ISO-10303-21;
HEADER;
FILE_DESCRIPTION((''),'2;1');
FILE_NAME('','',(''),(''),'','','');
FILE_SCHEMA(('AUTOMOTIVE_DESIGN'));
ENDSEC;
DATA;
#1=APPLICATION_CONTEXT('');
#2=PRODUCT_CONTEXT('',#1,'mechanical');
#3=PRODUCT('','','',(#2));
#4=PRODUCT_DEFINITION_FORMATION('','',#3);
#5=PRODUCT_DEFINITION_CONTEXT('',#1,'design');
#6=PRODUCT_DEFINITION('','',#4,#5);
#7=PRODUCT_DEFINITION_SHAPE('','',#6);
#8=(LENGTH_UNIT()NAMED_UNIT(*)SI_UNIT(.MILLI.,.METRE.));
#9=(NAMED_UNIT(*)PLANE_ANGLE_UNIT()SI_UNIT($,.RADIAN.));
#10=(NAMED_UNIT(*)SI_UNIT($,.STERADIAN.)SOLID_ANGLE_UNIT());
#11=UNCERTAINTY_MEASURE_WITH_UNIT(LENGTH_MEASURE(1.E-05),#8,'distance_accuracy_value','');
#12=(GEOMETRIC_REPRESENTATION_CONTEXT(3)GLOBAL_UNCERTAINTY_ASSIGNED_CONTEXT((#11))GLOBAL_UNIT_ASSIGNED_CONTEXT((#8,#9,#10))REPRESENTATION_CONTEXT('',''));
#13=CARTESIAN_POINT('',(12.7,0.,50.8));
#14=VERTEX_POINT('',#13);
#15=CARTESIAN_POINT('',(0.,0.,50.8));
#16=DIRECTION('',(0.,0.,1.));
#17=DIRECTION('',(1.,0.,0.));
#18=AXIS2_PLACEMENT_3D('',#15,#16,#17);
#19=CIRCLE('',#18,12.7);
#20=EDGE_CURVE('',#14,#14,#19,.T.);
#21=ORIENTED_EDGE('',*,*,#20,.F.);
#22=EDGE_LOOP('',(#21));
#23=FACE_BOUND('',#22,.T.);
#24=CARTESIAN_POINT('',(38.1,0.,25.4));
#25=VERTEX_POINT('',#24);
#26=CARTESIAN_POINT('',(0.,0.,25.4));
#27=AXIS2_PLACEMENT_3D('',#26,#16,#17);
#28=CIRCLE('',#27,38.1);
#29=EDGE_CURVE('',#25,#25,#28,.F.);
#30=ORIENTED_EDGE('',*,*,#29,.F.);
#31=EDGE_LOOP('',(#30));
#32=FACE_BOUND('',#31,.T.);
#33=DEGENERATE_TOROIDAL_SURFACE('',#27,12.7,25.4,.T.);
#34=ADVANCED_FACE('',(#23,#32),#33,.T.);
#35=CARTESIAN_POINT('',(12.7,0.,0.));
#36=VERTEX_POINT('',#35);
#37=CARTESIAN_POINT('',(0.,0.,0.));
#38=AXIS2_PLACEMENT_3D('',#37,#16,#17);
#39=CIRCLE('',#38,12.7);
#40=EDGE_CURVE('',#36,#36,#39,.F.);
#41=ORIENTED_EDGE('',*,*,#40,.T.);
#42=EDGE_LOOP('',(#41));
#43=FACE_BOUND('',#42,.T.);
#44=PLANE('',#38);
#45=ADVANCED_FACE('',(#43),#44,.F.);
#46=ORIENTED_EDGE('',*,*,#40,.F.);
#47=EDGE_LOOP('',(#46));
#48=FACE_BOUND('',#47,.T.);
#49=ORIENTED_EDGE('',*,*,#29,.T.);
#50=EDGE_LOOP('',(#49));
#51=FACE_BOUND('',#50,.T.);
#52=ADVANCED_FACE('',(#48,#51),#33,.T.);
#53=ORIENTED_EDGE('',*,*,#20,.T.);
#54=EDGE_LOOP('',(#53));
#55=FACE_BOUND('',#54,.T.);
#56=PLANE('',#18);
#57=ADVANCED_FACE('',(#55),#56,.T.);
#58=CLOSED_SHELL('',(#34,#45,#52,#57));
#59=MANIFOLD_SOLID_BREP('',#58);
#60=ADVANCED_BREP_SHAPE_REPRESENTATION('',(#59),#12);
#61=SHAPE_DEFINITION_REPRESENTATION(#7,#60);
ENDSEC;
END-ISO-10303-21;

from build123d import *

# Parameters (mm, degrees)
ESQUISSE1_R        = 38.1
BOSS_EXTRU_1_DEPTH = 50.8
CONG_1_R           = 25.4


with BuildPart() as part:
    # Esquisse1 → Boss.-Extru.1 (new body)
    with BuildSketch(Plane.XY):
        Circle(ESQUISSE1_R)
    extrude(amount=BOSS_EXTRU_1_DEPTH)

    # Congé1
    cong_1_edges = [part.edges().sort_by_distance(p)[0] for p in [
        (-38.1, 0, 0),
        (-38.1, 0, 50.8),
    ]]
    fillet(cong_1_edges, radius=CONG_1_R - 0.0001)  # a hair under: the kernel refuses the full size


solid = part.part
